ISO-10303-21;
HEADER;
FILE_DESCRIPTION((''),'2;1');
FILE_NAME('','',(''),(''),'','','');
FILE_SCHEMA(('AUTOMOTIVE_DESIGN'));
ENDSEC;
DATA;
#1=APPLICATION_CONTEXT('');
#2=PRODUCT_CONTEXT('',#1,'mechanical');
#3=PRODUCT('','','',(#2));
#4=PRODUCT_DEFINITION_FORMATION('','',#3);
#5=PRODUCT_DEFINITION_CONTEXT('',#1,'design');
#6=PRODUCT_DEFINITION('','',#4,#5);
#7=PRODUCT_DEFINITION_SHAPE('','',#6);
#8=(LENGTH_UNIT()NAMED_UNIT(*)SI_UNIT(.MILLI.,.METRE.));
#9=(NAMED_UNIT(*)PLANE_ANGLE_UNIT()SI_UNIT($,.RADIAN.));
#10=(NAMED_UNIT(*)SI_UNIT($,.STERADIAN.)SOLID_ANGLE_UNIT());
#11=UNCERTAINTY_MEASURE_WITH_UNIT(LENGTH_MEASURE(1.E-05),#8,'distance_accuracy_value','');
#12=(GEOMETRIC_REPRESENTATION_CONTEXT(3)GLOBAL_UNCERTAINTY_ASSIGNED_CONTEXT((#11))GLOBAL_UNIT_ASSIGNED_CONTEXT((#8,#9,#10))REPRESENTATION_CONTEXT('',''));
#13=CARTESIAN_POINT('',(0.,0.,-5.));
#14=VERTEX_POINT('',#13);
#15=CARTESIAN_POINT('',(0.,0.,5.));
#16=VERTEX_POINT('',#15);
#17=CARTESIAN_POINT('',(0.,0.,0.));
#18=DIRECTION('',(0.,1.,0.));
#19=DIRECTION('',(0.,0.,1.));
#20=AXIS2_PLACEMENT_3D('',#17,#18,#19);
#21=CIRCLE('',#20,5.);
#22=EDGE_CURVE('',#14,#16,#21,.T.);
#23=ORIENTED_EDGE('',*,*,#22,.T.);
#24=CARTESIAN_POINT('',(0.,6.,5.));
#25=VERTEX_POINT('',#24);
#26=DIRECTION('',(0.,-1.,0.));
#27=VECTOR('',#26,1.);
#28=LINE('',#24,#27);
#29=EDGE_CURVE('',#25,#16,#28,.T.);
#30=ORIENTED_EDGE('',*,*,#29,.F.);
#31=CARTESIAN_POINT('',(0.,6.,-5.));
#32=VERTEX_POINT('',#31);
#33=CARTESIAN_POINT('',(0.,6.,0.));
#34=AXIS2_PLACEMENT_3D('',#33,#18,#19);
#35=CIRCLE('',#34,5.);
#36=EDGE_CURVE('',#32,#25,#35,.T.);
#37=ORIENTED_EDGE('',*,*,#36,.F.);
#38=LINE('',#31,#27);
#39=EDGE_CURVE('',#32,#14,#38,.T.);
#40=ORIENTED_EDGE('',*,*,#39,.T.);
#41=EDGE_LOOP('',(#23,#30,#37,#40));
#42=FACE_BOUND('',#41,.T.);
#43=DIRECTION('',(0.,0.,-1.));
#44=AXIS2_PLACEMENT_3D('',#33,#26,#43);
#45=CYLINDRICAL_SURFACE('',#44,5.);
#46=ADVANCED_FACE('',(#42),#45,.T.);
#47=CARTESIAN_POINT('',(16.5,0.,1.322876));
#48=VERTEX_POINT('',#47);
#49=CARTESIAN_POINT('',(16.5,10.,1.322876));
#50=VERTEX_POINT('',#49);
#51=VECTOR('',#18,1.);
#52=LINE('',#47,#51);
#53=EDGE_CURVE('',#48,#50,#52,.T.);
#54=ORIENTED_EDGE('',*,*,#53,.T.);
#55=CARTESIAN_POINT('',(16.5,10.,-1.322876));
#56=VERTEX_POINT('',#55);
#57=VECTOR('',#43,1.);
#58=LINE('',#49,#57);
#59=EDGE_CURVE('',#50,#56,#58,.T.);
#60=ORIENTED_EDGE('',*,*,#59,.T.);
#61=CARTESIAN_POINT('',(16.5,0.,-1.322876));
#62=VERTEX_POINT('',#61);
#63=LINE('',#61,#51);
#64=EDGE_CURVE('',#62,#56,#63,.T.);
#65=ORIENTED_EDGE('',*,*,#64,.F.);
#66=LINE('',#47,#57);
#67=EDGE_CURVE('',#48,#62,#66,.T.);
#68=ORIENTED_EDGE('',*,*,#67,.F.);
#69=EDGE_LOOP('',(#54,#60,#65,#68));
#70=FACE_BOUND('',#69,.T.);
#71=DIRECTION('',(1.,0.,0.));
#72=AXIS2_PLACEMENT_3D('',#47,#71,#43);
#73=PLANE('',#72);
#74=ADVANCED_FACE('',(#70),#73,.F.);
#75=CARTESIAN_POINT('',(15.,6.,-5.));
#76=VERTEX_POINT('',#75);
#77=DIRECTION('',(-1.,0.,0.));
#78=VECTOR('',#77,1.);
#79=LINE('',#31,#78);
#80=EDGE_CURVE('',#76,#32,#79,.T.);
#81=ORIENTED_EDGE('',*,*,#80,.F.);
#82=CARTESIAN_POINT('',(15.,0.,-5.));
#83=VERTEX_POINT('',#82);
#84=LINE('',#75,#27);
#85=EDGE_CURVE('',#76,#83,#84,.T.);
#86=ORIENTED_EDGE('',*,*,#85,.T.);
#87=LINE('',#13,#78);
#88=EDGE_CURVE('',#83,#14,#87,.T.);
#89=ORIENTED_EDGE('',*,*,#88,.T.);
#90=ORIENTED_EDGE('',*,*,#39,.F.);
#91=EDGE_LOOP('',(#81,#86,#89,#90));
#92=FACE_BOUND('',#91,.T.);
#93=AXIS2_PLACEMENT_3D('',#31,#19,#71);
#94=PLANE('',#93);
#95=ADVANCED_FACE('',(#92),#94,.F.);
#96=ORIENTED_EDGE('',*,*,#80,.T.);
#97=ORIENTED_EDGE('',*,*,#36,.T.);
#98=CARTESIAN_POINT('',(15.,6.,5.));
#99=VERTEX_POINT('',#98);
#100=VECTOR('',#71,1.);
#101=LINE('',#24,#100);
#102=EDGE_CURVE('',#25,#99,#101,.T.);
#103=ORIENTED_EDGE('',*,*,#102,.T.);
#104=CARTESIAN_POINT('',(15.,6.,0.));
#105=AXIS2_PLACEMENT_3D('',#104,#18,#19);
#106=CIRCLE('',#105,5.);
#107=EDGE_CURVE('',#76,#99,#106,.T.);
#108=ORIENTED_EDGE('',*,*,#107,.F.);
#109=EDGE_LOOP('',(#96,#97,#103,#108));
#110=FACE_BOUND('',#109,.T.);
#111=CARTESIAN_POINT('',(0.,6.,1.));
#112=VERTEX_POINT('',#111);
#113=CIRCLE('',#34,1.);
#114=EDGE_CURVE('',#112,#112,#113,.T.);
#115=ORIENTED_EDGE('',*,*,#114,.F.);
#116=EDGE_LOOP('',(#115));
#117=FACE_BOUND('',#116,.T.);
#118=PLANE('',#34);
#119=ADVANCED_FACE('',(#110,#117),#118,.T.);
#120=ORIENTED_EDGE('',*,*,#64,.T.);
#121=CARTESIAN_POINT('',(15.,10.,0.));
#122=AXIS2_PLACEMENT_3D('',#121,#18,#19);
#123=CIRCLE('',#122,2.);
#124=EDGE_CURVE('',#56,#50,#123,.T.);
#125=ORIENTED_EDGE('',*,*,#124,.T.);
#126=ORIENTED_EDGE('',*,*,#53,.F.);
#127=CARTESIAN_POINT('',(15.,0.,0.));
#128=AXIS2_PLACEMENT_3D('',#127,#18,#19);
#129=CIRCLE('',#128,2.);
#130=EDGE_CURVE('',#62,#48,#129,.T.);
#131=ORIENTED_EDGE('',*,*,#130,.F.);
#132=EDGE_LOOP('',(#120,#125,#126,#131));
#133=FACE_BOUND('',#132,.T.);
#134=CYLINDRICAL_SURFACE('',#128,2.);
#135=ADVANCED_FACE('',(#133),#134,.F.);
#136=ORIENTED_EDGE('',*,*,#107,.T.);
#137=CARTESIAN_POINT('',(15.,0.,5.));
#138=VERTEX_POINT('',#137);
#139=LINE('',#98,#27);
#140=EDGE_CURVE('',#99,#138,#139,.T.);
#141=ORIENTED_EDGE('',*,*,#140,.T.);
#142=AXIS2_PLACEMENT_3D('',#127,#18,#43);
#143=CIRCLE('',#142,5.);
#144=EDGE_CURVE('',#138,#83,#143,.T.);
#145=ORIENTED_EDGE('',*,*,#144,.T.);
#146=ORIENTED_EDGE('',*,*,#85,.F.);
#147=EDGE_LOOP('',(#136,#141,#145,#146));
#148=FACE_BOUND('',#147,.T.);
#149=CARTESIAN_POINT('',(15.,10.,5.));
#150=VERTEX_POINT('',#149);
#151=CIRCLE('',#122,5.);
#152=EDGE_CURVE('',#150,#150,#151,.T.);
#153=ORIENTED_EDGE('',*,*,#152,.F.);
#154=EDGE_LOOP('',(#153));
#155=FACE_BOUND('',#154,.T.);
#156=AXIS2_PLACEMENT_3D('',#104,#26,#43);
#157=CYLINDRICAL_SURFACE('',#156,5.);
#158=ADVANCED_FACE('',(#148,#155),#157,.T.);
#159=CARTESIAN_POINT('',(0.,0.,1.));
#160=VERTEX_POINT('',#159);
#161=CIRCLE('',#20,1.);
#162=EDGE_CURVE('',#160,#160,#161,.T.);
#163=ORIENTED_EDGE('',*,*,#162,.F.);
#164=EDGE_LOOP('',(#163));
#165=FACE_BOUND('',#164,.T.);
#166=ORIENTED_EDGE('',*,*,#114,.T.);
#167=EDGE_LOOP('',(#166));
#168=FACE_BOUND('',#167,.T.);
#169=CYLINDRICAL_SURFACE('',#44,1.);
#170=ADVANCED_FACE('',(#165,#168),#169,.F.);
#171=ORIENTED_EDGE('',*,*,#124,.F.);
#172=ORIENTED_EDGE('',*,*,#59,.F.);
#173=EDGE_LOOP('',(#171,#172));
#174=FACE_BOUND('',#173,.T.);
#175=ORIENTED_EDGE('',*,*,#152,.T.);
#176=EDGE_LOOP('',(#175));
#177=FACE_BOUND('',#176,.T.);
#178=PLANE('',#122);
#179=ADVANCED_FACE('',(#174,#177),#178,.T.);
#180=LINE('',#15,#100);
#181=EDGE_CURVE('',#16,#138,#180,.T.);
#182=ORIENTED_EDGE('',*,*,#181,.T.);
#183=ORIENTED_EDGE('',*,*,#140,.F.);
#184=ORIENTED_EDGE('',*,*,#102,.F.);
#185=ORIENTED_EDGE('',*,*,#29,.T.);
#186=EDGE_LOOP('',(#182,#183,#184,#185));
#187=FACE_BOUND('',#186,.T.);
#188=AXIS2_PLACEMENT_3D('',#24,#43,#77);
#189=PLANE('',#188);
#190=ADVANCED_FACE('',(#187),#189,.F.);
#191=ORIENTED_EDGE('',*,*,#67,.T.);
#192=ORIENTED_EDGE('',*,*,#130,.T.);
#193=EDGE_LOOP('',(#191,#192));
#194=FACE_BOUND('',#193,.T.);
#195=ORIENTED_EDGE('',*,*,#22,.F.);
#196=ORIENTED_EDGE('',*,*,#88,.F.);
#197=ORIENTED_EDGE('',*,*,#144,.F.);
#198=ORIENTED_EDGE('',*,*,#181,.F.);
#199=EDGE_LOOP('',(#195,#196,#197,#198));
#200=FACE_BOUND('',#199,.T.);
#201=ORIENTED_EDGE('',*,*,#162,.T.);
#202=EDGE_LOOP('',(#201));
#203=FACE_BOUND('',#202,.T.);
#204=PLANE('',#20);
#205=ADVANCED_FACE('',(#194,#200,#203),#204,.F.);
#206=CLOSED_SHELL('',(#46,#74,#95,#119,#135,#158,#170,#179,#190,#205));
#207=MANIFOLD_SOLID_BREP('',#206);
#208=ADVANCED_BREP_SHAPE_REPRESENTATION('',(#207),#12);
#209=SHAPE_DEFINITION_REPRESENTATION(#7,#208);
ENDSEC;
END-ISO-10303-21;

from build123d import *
from build123d.topology import SkipClean

# Parameters (mm, degrees)
SKETCH1_R           = 1
BOSS_EXTRUDE1_DEPTH = 6
SKETCH2_R           = 5
BOSS_EXTRUDE2_DEPTH = 4
CUT_EXTRUDE1_DEPTH  = 23.912878475


with BuildPart() as part:
    # Sketch1 → Boss-Extrude1 (new body)
    with BuildSketch(Plane(origin=(0, 0, 0), x_dir=(1, 0, 0), z_dir=(0, 1, 0))):
        with BuildLine():
            Line((0, 5), (15, 5))
            ThreePointArc((15, 5), (20, 0), (15, -5))
            Line((15, -5), (0, -5))
            ThreePointArc((0, -5), (-5, 0), (0, 5))
        make_face()
        Circle(SKETCH1_R, mode=Mode.SUBTRACT)
    extrude(amount=BOSS_EXTRUDE1_DEPTH)

    # Sketch2 → Boss-Extrude2 (add)
    with SkipClean():  # the faces are left unmerged after this step: merging them gives an invalid solid
        with BuildSketch(Plane(origin=(0, 6, 0), x_dir=(1, 0, 0), z_dir=(0, 1, 0))):
            with Locations((15, 0)):
                Circle(SKETCH2_R)
        extrude(amount=BOSS_EXTRUDE2_DEPTH)
    add(part.part.scale(1), mode=Mode.REPLACE)  # the faces are merged on a copy

    # Sketch3 → Cut-Extrude1 (cut, through all)
    with BuildSketch(Plane(origin=(0, 10, 0), x_dir=(1, 0, 0), z_dir=(0, 1, 0))):
        with BuildLine():
            Line((16.5, -1.322875656), (16.5, 1.322875656))
            ThreePointArc((16.5, 1.322875656), (13, 0), (16.5, -1.322875656))
        make_face()
    extrude(amount=-CUT_EXTRUDE1_DEPTH, mode=Mode.SUBTRACT)


solid = part.part
